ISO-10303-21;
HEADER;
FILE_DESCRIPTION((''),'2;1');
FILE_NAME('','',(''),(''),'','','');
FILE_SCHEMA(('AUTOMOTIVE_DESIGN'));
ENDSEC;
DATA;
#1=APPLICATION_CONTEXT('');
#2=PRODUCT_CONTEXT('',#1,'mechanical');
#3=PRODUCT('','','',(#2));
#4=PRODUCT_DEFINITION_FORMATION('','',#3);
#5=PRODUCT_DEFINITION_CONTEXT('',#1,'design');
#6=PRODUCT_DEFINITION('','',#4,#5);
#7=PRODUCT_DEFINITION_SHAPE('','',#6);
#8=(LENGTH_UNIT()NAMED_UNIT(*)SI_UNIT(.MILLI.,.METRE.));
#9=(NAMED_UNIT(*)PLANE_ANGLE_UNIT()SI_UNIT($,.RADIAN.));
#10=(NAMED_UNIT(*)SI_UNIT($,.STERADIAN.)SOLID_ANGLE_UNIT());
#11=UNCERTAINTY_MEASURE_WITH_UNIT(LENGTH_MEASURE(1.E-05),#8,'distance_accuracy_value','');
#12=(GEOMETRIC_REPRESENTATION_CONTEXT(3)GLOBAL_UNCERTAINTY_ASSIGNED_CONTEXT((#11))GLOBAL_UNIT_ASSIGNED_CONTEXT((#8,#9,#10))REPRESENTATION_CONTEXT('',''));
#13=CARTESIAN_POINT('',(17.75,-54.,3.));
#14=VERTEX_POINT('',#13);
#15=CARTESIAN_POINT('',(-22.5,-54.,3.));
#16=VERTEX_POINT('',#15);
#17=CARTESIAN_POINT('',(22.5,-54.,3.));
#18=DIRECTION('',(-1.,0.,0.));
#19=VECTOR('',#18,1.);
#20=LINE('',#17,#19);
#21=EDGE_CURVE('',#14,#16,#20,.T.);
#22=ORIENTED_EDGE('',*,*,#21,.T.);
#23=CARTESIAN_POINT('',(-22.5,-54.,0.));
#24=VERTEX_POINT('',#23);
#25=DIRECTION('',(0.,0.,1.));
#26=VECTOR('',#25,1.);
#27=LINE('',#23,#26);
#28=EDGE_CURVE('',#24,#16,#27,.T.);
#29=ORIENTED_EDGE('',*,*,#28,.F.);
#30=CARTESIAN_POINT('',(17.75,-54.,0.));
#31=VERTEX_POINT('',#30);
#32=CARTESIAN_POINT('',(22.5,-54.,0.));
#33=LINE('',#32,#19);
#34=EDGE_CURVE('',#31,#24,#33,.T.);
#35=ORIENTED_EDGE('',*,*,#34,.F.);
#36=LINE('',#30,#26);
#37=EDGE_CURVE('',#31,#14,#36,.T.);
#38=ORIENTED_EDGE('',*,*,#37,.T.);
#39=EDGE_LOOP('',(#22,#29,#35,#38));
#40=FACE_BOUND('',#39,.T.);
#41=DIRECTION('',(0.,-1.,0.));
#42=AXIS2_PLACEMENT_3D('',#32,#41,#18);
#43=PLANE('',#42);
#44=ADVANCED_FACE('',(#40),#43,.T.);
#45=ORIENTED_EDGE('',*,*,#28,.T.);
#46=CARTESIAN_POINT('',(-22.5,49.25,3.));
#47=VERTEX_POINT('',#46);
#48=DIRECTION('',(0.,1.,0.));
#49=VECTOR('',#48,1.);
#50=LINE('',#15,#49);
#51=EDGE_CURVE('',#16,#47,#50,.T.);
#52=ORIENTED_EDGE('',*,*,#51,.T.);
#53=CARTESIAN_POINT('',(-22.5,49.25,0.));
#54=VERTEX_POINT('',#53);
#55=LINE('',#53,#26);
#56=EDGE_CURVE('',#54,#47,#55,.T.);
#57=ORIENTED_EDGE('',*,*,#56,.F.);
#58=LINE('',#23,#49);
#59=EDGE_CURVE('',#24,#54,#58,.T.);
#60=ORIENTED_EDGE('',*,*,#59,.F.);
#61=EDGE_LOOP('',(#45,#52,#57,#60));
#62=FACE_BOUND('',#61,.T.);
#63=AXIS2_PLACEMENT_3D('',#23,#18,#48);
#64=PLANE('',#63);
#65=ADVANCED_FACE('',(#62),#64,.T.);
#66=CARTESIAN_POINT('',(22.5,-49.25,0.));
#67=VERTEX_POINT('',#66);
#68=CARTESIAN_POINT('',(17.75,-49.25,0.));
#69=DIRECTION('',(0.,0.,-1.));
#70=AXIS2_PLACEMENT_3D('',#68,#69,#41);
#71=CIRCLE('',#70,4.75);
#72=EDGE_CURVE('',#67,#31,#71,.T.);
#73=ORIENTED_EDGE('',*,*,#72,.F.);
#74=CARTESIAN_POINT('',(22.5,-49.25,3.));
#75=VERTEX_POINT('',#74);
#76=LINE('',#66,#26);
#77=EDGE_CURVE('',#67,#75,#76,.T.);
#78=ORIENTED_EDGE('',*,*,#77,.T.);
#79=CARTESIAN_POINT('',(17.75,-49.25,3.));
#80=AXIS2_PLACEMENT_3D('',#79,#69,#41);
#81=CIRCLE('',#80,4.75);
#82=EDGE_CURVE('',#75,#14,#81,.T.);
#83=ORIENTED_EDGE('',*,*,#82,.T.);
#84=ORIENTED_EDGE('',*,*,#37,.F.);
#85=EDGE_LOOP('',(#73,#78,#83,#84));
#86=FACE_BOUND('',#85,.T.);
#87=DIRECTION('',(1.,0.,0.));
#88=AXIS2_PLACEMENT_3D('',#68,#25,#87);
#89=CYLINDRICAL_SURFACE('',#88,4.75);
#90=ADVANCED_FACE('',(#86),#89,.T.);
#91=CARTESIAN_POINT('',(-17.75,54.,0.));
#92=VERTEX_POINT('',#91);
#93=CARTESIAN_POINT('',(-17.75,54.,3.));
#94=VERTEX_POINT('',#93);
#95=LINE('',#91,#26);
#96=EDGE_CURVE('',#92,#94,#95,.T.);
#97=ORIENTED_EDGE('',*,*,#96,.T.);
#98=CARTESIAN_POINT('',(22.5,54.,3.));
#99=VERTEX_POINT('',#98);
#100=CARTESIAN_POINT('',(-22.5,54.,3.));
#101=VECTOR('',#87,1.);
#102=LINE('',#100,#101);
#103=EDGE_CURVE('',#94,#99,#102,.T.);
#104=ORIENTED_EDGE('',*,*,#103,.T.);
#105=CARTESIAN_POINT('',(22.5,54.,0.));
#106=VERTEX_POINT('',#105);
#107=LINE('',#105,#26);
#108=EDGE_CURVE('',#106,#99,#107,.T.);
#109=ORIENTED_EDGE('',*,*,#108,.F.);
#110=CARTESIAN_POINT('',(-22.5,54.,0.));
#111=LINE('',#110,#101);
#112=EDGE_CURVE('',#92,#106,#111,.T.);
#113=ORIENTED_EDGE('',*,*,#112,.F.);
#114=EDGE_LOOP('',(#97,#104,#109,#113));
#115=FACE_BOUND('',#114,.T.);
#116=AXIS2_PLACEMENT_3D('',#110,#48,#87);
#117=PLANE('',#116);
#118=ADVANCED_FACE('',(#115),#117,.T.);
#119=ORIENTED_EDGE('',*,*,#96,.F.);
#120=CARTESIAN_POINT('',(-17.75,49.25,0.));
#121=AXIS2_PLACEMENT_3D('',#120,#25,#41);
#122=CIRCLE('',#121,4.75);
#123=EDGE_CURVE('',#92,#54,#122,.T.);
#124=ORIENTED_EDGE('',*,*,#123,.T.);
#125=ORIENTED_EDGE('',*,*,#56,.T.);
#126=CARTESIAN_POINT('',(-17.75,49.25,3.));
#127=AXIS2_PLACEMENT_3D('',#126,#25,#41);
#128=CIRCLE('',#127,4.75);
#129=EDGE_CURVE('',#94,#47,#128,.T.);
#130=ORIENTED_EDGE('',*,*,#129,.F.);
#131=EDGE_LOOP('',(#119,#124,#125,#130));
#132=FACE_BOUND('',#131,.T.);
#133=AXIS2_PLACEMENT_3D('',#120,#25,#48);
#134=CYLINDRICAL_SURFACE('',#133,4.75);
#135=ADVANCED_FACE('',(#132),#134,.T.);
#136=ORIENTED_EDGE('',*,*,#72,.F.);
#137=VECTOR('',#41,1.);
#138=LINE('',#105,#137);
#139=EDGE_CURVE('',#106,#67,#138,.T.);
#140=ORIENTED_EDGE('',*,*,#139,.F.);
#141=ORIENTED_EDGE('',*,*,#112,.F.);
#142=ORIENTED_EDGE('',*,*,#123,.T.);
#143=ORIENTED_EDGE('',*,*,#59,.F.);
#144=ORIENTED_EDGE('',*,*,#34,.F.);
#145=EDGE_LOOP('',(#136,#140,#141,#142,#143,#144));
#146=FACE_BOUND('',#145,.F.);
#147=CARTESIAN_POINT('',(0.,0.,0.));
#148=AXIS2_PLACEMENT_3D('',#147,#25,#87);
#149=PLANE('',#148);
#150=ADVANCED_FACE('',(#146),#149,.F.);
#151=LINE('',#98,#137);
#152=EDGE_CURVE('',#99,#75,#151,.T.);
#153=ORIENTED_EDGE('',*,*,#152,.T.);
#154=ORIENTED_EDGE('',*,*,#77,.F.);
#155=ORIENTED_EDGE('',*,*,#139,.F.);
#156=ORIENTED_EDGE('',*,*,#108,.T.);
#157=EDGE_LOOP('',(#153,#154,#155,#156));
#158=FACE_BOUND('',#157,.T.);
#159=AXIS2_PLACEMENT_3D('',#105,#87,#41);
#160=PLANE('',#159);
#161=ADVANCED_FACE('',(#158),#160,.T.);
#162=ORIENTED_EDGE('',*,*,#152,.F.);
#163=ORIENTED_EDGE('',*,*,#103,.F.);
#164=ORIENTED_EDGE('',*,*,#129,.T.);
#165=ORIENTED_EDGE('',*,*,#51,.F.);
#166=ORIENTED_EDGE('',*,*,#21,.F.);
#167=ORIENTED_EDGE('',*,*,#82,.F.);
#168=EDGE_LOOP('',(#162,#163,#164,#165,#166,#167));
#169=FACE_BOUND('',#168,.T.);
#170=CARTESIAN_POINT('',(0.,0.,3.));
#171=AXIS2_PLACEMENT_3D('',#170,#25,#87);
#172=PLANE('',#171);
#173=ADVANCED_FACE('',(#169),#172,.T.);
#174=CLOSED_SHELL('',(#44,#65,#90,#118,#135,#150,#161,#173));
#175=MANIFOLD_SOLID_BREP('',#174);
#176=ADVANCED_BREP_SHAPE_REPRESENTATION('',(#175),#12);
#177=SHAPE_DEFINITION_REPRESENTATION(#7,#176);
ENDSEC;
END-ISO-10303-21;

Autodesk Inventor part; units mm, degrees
ref_plane "YZ Plane" through (0, 0, 0) normal (1, 0, 0) x (0, 1, 0)
ref_plane "XZ Plane" through (0, 0, 0) normal (0, 1, 0) x (-1, 0, 0)
ref_plane "XY Plane" through (0, 0, 0) normal (0, 0, 1) x (1, 0, 0)
sketch "Sketch1" plane through (0, 0, 0) normal (0, 0, 1) x (1, 0, 0)
  line L0 (-22.5, 54) -> (22.5, 54)
  line L1 (22.5, 54) -> (22.5, -54)
  line L2 (22.5, -54) -> (-22.5, -54)
  line L3 (-22.5, -54) -> (-22.5, 54)
  line L4 (-22.5, 54) -> (22.5, -54) construction
  point P0 (0, 0)
  point P1 (0, 0)
  dimension "d0" = 45
  dimension "d1" = 108
extrude "Plate1" add sketch "Sketch1" along normal blind 3
fillet "Corner Round2" radius 4.75 2 edges at (22.5, -54, 1.5) (-22.5, 54, 1.5)
equation "\"d0\" = RIDGE_1_width"
equation "\"d2\" = Thickness"
equation "\"BendReliefWidth\" = Thickness"
equation "\"BendReliefDepth\" = 0.5 * Thickness"
equation "\"CornerReliefSize\" = 4 * Thickness"
equation "\"MinimumRemnant\" = 2 * Thickness"
equation "\"TransitionRadius\" = BendRadius"
equation "\"JacobiRadiusSize\" = BendRadius"
equation "\"GapSize\" = Thickness"
equation "\"RIDGE_1_width\" = 45"
equation "\"Thickness\" = 3"
equation "\"BendRadius\" = 5"
properties part number "DS-B-104 ridge end cap" material "Stainless Steel"
